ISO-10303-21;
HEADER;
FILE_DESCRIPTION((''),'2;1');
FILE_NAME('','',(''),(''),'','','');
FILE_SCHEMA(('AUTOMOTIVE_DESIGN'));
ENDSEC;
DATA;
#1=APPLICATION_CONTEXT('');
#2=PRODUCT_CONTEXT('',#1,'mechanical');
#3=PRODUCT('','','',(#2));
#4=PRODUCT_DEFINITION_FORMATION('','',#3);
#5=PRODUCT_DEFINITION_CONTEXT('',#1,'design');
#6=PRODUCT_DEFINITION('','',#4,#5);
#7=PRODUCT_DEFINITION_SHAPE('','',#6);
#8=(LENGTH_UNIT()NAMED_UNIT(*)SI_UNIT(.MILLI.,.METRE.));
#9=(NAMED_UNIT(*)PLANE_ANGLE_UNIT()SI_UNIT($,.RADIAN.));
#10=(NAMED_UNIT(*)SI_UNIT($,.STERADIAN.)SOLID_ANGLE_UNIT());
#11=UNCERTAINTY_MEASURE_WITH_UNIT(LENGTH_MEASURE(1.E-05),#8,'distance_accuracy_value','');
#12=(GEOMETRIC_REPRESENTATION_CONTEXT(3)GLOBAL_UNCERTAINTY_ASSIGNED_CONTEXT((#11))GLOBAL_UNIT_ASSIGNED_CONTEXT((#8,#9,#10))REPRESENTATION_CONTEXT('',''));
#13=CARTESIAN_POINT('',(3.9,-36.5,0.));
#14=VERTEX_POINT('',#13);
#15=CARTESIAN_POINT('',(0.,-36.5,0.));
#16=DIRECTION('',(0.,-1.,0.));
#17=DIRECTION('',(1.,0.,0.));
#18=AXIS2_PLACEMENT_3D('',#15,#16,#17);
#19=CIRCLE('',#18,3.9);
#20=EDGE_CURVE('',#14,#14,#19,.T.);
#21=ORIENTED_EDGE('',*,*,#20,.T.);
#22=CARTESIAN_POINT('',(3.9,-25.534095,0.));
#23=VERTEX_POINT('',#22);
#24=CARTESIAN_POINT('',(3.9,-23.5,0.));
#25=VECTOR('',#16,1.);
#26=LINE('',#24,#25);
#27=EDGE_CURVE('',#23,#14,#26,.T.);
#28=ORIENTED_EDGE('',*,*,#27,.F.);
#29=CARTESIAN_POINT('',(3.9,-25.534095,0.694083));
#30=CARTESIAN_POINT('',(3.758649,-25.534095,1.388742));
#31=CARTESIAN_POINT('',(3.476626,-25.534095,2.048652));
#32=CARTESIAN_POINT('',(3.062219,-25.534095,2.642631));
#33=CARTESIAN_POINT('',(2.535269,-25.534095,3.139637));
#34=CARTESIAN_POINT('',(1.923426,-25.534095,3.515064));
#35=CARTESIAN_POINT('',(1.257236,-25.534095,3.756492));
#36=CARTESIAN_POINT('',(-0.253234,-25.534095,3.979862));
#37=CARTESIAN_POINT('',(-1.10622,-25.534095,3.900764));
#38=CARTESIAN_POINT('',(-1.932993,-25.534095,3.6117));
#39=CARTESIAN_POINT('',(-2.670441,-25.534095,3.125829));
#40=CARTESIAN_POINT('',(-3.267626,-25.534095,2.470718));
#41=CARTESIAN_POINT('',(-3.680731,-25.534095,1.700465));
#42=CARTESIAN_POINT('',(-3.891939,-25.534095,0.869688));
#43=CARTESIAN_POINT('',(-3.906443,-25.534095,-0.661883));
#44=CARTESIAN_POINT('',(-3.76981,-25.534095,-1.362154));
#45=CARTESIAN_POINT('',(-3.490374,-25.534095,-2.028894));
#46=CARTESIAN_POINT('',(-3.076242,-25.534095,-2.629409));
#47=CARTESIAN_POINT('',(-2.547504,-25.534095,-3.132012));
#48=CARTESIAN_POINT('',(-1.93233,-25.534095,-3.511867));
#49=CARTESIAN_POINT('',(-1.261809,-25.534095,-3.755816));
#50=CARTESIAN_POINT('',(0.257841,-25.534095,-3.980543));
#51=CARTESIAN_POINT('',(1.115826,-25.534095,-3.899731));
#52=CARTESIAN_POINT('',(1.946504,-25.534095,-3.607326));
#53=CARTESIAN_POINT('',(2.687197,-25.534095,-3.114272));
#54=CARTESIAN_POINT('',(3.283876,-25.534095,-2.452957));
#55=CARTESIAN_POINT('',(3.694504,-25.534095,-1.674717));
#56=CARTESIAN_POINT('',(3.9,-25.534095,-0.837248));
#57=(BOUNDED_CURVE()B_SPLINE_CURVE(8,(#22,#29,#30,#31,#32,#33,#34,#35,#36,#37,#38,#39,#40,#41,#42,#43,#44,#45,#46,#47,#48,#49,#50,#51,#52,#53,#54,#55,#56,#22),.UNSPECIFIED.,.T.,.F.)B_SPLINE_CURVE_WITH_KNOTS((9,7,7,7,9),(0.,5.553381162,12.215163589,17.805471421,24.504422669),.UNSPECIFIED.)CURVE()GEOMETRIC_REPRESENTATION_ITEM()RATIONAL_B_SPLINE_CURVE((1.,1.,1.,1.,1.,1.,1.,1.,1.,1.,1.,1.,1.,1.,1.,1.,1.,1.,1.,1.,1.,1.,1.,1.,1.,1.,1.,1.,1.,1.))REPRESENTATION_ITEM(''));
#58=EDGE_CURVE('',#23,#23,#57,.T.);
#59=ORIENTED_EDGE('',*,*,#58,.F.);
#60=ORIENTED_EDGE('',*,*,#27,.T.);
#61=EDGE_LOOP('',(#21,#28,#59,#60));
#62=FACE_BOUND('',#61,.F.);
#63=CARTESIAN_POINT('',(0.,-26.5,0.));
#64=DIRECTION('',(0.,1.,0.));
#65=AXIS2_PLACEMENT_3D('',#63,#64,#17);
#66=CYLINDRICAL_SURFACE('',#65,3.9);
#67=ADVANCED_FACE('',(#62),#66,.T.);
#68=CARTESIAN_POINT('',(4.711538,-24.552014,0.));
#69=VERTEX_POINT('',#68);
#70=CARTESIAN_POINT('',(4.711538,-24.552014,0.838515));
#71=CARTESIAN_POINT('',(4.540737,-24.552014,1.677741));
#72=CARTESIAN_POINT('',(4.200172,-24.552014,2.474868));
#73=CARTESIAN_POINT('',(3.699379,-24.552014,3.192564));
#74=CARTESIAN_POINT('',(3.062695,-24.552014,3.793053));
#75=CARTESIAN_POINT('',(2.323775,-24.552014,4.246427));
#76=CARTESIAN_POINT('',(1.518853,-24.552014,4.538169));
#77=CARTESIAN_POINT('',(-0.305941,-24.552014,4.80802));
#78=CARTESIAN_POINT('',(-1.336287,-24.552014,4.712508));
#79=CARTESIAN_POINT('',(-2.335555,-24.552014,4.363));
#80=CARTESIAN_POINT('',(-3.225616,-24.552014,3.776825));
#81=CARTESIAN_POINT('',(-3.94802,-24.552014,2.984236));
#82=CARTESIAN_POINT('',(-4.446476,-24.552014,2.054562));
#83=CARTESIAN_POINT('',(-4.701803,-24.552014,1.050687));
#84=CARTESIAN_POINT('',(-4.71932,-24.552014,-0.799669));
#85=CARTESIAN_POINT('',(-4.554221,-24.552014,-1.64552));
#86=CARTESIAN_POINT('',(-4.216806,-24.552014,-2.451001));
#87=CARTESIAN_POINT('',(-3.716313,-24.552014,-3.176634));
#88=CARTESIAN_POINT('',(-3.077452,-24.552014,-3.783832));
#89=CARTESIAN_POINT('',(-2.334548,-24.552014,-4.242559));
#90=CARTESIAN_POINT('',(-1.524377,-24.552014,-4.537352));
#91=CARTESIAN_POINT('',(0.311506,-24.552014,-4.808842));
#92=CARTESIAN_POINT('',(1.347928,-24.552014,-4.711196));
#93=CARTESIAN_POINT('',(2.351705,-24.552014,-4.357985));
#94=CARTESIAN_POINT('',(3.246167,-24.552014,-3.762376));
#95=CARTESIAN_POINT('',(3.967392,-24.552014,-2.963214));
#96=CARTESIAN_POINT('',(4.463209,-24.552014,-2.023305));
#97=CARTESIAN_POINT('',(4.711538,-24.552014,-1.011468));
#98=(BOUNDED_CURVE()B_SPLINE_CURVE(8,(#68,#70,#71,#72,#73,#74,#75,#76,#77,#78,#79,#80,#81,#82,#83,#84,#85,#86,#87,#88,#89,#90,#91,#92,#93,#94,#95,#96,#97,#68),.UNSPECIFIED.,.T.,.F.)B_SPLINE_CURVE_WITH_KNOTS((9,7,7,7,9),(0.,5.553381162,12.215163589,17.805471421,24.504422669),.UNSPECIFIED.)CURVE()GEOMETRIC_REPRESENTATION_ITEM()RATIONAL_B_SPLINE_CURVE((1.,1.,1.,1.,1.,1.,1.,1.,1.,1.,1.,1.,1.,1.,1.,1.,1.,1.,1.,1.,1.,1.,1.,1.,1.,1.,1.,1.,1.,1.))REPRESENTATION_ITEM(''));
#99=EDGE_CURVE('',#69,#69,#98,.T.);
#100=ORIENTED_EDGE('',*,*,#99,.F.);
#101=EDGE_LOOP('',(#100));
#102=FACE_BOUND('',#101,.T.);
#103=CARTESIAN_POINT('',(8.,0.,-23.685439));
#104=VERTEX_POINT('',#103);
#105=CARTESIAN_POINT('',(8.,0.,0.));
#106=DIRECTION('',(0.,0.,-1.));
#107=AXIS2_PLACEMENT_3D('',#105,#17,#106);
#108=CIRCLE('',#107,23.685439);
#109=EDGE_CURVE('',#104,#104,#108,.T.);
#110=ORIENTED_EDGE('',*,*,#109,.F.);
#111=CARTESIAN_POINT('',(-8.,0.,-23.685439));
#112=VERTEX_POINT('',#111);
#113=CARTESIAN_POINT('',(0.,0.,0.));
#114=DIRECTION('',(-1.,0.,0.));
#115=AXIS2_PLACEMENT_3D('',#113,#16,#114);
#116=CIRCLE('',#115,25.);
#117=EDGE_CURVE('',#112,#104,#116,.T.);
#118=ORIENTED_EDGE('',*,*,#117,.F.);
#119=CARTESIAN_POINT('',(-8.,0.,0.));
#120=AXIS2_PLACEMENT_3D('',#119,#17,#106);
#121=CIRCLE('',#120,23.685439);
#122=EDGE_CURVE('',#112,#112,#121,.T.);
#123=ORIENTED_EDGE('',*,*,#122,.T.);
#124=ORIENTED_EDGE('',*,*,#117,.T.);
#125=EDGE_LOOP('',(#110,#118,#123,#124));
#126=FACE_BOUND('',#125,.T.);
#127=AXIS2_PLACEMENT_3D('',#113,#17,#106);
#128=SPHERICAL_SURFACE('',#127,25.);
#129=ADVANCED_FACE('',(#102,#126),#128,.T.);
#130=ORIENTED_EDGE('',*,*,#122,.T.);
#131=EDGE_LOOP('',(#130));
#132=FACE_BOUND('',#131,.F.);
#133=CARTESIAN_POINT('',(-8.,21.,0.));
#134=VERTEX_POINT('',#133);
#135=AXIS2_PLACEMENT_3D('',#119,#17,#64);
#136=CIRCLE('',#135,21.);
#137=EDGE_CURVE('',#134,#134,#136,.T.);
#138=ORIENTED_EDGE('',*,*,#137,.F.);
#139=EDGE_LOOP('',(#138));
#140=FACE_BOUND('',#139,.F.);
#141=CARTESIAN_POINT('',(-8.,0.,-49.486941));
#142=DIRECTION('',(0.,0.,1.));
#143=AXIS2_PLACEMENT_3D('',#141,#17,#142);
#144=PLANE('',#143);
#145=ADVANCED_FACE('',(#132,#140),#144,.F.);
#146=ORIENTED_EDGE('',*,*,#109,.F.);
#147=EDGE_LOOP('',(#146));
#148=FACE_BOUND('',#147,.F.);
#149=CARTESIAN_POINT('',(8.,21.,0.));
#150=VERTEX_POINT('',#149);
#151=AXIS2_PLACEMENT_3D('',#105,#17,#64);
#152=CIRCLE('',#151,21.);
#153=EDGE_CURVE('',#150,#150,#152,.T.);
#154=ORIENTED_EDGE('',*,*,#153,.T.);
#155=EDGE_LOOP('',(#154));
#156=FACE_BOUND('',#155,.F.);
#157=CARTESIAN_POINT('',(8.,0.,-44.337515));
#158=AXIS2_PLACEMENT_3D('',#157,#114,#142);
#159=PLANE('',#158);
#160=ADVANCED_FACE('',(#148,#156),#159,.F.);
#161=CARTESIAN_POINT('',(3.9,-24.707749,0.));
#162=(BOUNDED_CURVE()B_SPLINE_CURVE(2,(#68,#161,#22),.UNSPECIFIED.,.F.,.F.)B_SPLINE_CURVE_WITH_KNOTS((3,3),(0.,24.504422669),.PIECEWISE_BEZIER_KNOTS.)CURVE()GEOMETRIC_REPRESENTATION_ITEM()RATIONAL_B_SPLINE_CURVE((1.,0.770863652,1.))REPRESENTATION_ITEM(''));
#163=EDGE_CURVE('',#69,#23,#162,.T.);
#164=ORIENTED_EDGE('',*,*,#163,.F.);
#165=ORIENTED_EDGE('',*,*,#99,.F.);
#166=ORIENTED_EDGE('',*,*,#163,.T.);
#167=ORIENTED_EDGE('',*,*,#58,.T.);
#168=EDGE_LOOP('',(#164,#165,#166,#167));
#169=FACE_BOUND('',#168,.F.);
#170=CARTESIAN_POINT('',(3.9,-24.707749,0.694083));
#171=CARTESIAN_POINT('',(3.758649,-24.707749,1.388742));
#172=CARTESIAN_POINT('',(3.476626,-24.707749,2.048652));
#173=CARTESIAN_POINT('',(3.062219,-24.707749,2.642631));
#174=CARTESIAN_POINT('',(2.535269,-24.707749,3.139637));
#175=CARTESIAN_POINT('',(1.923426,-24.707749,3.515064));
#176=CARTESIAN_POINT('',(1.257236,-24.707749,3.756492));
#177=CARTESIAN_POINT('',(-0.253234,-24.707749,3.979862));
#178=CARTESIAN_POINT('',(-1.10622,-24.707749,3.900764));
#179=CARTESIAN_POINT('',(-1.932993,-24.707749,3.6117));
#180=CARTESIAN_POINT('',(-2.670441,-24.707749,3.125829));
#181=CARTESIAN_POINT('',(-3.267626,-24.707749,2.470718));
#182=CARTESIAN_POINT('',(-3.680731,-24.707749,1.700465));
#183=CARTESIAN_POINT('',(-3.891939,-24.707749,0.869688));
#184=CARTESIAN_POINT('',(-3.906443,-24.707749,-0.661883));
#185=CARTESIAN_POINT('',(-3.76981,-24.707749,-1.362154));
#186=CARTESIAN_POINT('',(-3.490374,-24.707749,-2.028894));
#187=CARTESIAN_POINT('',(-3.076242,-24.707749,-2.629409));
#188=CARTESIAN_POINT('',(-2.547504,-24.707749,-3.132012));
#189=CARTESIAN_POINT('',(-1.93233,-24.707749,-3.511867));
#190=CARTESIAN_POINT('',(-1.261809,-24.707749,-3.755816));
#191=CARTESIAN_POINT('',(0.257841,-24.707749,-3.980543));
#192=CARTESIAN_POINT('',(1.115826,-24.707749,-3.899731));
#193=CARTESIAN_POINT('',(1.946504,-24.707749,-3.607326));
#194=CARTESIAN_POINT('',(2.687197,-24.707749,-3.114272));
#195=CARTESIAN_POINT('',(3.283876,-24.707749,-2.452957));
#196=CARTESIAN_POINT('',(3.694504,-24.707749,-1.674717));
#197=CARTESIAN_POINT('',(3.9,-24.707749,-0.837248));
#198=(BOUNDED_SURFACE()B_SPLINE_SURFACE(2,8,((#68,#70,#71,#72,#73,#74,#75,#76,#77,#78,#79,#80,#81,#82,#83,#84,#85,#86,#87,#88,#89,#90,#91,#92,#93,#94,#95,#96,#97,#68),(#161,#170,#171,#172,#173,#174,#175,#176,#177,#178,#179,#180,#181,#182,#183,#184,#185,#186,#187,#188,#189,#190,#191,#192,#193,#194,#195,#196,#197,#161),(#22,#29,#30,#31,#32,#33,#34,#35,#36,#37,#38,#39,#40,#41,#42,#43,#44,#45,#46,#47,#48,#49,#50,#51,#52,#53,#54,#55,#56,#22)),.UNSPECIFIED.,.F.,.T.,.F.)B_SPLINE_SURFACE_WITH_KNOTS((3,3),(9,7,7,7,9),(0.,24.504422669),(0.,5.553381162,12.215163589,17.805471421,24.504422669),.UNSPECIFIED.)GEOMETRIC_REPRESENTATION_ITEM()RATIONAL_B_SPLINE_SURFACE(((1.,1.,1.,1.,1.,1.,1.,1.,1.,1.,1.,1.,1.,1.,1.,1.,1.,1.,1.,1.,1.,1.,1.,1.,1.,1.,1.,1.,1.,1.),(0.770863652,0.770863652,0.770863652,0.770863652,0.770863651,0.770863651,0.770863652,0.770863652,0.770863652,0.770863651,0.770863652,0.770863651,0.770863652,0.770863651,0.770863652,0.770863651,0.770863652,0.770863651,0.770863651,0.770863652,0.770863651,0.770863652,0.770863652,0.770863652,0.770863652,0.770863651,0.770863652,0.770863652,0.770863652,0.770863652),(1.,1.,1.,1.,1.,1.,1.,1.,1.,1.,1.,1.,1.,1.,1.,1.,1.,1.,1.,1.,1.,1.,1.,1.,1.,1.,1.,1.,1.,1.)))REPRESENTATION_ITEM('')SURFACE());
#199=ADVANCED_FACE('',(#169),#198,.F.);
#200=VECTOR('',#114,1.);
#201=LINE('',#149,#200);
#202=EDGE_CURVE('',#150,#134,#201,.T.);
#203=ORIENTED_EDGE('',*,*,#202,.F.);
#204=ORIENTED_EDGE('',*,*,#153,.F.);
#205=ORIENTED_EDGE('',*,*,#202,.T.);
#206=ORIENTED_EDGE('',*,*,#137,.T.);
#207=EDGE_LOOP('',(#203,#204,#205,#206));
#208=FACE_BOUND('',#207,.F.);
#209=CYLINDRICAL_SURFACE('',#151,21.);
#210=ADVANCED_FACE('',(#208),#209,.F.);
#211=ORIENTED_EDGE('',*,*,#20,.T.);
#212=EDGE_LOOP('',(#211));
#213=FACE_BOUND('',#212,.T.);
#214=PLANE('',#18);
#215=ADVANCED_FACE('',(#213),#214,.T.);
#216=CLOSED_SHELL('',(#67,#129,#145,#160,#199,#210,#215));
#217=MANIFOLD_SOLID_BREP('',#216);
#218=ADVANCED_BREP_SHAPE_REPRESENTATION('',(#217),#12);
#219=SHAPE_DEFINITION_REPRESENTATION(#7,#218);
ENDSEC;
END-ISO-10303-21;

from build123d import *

# Parameters (mm, degrees)
F2_W      = 21.7011459378
F2_H      = 87.9080442688
F2_W_2    = 24.2758599693
F2_H_2    = 94.1609184015
F3_DEPTH  = 30
F4_R      = 20
F5_DEPTH  = 15
F6_R      = 21
F7_DEPTH  = 30
F9_R      = 3.9
F10_DEPTH = 1.5
F11_DEPTH = 10
F13_R     = 1


with BuildPart() as f1:
    # F0 (on Front) → F1 (revolve)
    with BuildSketch(Plane.XZ):
        with BuildLine():
            Line((25, 0), (21, 0))
            ThreePointArc((21, 0), (0, -21), (-21, 0))
            Line((-21, 0), (-25, 0))
            ThreePointArc((-25, 0), (0, -25), (25, 0))
        make_face()
    revolve(axis=Axis((0, 0, 0), (1, 0, 0)))

    # F2 (on Front) → F3 (cut, symmetric)
    with BuildSketch(Plane.XZ):
        with Locations((18.8505729689, -0.3834927207)):
            Rectangle(F2_W, F2_H)
        with Locations((-20.1379299847, -2.4064816535)):
            Rectangle(F2_W_2, F2_H_2)
    extrude(amount=F3_DEPTH, both=True, mode=Mode.SUBTRACT)

    # F4 (on face) → F5 (cut)
    with BuildSketch(Plane.YZ.offset(8)):
        Circle(F4_R)
    extrude(amount=-F5_DEPTH, mode=Mode.SUBTRACT)

    # F6 (on face) → F7 (cut, symmetric)
    with BuildSketch(Plane.YZ.offset(8)):
        Circle(F6_R)
    extrude(amount=F7_DEPTH, both=True, mode=Mode.SUBTRACT)


with BuildPart() as f10:
    # F9 (on offset) → F10 (new body, symmetric)
    with BuildSketch(Plane.XZ.offset(25)):
        Circle(F9_R)
    extrude(amount=F10_DEPTH, both=True)

    # F11 (add): a face of the model
    f11_faces = [f10.faces().sort_by_distance(p)[0] for p in [
        (0, -26.5, 0),
    ]]
    extrude(f11_faces, amount=F11_DEPTH)

    # F12: union F1
    add(f1.part)

    # F13
    f13_edges = [f10.edges().sort_by_distance(p)[0] for p in [
        (-3.9, -24.693926, 0),
    ]]
    fillet(f13_edges, radius=F13_R)


solid = f10.part
